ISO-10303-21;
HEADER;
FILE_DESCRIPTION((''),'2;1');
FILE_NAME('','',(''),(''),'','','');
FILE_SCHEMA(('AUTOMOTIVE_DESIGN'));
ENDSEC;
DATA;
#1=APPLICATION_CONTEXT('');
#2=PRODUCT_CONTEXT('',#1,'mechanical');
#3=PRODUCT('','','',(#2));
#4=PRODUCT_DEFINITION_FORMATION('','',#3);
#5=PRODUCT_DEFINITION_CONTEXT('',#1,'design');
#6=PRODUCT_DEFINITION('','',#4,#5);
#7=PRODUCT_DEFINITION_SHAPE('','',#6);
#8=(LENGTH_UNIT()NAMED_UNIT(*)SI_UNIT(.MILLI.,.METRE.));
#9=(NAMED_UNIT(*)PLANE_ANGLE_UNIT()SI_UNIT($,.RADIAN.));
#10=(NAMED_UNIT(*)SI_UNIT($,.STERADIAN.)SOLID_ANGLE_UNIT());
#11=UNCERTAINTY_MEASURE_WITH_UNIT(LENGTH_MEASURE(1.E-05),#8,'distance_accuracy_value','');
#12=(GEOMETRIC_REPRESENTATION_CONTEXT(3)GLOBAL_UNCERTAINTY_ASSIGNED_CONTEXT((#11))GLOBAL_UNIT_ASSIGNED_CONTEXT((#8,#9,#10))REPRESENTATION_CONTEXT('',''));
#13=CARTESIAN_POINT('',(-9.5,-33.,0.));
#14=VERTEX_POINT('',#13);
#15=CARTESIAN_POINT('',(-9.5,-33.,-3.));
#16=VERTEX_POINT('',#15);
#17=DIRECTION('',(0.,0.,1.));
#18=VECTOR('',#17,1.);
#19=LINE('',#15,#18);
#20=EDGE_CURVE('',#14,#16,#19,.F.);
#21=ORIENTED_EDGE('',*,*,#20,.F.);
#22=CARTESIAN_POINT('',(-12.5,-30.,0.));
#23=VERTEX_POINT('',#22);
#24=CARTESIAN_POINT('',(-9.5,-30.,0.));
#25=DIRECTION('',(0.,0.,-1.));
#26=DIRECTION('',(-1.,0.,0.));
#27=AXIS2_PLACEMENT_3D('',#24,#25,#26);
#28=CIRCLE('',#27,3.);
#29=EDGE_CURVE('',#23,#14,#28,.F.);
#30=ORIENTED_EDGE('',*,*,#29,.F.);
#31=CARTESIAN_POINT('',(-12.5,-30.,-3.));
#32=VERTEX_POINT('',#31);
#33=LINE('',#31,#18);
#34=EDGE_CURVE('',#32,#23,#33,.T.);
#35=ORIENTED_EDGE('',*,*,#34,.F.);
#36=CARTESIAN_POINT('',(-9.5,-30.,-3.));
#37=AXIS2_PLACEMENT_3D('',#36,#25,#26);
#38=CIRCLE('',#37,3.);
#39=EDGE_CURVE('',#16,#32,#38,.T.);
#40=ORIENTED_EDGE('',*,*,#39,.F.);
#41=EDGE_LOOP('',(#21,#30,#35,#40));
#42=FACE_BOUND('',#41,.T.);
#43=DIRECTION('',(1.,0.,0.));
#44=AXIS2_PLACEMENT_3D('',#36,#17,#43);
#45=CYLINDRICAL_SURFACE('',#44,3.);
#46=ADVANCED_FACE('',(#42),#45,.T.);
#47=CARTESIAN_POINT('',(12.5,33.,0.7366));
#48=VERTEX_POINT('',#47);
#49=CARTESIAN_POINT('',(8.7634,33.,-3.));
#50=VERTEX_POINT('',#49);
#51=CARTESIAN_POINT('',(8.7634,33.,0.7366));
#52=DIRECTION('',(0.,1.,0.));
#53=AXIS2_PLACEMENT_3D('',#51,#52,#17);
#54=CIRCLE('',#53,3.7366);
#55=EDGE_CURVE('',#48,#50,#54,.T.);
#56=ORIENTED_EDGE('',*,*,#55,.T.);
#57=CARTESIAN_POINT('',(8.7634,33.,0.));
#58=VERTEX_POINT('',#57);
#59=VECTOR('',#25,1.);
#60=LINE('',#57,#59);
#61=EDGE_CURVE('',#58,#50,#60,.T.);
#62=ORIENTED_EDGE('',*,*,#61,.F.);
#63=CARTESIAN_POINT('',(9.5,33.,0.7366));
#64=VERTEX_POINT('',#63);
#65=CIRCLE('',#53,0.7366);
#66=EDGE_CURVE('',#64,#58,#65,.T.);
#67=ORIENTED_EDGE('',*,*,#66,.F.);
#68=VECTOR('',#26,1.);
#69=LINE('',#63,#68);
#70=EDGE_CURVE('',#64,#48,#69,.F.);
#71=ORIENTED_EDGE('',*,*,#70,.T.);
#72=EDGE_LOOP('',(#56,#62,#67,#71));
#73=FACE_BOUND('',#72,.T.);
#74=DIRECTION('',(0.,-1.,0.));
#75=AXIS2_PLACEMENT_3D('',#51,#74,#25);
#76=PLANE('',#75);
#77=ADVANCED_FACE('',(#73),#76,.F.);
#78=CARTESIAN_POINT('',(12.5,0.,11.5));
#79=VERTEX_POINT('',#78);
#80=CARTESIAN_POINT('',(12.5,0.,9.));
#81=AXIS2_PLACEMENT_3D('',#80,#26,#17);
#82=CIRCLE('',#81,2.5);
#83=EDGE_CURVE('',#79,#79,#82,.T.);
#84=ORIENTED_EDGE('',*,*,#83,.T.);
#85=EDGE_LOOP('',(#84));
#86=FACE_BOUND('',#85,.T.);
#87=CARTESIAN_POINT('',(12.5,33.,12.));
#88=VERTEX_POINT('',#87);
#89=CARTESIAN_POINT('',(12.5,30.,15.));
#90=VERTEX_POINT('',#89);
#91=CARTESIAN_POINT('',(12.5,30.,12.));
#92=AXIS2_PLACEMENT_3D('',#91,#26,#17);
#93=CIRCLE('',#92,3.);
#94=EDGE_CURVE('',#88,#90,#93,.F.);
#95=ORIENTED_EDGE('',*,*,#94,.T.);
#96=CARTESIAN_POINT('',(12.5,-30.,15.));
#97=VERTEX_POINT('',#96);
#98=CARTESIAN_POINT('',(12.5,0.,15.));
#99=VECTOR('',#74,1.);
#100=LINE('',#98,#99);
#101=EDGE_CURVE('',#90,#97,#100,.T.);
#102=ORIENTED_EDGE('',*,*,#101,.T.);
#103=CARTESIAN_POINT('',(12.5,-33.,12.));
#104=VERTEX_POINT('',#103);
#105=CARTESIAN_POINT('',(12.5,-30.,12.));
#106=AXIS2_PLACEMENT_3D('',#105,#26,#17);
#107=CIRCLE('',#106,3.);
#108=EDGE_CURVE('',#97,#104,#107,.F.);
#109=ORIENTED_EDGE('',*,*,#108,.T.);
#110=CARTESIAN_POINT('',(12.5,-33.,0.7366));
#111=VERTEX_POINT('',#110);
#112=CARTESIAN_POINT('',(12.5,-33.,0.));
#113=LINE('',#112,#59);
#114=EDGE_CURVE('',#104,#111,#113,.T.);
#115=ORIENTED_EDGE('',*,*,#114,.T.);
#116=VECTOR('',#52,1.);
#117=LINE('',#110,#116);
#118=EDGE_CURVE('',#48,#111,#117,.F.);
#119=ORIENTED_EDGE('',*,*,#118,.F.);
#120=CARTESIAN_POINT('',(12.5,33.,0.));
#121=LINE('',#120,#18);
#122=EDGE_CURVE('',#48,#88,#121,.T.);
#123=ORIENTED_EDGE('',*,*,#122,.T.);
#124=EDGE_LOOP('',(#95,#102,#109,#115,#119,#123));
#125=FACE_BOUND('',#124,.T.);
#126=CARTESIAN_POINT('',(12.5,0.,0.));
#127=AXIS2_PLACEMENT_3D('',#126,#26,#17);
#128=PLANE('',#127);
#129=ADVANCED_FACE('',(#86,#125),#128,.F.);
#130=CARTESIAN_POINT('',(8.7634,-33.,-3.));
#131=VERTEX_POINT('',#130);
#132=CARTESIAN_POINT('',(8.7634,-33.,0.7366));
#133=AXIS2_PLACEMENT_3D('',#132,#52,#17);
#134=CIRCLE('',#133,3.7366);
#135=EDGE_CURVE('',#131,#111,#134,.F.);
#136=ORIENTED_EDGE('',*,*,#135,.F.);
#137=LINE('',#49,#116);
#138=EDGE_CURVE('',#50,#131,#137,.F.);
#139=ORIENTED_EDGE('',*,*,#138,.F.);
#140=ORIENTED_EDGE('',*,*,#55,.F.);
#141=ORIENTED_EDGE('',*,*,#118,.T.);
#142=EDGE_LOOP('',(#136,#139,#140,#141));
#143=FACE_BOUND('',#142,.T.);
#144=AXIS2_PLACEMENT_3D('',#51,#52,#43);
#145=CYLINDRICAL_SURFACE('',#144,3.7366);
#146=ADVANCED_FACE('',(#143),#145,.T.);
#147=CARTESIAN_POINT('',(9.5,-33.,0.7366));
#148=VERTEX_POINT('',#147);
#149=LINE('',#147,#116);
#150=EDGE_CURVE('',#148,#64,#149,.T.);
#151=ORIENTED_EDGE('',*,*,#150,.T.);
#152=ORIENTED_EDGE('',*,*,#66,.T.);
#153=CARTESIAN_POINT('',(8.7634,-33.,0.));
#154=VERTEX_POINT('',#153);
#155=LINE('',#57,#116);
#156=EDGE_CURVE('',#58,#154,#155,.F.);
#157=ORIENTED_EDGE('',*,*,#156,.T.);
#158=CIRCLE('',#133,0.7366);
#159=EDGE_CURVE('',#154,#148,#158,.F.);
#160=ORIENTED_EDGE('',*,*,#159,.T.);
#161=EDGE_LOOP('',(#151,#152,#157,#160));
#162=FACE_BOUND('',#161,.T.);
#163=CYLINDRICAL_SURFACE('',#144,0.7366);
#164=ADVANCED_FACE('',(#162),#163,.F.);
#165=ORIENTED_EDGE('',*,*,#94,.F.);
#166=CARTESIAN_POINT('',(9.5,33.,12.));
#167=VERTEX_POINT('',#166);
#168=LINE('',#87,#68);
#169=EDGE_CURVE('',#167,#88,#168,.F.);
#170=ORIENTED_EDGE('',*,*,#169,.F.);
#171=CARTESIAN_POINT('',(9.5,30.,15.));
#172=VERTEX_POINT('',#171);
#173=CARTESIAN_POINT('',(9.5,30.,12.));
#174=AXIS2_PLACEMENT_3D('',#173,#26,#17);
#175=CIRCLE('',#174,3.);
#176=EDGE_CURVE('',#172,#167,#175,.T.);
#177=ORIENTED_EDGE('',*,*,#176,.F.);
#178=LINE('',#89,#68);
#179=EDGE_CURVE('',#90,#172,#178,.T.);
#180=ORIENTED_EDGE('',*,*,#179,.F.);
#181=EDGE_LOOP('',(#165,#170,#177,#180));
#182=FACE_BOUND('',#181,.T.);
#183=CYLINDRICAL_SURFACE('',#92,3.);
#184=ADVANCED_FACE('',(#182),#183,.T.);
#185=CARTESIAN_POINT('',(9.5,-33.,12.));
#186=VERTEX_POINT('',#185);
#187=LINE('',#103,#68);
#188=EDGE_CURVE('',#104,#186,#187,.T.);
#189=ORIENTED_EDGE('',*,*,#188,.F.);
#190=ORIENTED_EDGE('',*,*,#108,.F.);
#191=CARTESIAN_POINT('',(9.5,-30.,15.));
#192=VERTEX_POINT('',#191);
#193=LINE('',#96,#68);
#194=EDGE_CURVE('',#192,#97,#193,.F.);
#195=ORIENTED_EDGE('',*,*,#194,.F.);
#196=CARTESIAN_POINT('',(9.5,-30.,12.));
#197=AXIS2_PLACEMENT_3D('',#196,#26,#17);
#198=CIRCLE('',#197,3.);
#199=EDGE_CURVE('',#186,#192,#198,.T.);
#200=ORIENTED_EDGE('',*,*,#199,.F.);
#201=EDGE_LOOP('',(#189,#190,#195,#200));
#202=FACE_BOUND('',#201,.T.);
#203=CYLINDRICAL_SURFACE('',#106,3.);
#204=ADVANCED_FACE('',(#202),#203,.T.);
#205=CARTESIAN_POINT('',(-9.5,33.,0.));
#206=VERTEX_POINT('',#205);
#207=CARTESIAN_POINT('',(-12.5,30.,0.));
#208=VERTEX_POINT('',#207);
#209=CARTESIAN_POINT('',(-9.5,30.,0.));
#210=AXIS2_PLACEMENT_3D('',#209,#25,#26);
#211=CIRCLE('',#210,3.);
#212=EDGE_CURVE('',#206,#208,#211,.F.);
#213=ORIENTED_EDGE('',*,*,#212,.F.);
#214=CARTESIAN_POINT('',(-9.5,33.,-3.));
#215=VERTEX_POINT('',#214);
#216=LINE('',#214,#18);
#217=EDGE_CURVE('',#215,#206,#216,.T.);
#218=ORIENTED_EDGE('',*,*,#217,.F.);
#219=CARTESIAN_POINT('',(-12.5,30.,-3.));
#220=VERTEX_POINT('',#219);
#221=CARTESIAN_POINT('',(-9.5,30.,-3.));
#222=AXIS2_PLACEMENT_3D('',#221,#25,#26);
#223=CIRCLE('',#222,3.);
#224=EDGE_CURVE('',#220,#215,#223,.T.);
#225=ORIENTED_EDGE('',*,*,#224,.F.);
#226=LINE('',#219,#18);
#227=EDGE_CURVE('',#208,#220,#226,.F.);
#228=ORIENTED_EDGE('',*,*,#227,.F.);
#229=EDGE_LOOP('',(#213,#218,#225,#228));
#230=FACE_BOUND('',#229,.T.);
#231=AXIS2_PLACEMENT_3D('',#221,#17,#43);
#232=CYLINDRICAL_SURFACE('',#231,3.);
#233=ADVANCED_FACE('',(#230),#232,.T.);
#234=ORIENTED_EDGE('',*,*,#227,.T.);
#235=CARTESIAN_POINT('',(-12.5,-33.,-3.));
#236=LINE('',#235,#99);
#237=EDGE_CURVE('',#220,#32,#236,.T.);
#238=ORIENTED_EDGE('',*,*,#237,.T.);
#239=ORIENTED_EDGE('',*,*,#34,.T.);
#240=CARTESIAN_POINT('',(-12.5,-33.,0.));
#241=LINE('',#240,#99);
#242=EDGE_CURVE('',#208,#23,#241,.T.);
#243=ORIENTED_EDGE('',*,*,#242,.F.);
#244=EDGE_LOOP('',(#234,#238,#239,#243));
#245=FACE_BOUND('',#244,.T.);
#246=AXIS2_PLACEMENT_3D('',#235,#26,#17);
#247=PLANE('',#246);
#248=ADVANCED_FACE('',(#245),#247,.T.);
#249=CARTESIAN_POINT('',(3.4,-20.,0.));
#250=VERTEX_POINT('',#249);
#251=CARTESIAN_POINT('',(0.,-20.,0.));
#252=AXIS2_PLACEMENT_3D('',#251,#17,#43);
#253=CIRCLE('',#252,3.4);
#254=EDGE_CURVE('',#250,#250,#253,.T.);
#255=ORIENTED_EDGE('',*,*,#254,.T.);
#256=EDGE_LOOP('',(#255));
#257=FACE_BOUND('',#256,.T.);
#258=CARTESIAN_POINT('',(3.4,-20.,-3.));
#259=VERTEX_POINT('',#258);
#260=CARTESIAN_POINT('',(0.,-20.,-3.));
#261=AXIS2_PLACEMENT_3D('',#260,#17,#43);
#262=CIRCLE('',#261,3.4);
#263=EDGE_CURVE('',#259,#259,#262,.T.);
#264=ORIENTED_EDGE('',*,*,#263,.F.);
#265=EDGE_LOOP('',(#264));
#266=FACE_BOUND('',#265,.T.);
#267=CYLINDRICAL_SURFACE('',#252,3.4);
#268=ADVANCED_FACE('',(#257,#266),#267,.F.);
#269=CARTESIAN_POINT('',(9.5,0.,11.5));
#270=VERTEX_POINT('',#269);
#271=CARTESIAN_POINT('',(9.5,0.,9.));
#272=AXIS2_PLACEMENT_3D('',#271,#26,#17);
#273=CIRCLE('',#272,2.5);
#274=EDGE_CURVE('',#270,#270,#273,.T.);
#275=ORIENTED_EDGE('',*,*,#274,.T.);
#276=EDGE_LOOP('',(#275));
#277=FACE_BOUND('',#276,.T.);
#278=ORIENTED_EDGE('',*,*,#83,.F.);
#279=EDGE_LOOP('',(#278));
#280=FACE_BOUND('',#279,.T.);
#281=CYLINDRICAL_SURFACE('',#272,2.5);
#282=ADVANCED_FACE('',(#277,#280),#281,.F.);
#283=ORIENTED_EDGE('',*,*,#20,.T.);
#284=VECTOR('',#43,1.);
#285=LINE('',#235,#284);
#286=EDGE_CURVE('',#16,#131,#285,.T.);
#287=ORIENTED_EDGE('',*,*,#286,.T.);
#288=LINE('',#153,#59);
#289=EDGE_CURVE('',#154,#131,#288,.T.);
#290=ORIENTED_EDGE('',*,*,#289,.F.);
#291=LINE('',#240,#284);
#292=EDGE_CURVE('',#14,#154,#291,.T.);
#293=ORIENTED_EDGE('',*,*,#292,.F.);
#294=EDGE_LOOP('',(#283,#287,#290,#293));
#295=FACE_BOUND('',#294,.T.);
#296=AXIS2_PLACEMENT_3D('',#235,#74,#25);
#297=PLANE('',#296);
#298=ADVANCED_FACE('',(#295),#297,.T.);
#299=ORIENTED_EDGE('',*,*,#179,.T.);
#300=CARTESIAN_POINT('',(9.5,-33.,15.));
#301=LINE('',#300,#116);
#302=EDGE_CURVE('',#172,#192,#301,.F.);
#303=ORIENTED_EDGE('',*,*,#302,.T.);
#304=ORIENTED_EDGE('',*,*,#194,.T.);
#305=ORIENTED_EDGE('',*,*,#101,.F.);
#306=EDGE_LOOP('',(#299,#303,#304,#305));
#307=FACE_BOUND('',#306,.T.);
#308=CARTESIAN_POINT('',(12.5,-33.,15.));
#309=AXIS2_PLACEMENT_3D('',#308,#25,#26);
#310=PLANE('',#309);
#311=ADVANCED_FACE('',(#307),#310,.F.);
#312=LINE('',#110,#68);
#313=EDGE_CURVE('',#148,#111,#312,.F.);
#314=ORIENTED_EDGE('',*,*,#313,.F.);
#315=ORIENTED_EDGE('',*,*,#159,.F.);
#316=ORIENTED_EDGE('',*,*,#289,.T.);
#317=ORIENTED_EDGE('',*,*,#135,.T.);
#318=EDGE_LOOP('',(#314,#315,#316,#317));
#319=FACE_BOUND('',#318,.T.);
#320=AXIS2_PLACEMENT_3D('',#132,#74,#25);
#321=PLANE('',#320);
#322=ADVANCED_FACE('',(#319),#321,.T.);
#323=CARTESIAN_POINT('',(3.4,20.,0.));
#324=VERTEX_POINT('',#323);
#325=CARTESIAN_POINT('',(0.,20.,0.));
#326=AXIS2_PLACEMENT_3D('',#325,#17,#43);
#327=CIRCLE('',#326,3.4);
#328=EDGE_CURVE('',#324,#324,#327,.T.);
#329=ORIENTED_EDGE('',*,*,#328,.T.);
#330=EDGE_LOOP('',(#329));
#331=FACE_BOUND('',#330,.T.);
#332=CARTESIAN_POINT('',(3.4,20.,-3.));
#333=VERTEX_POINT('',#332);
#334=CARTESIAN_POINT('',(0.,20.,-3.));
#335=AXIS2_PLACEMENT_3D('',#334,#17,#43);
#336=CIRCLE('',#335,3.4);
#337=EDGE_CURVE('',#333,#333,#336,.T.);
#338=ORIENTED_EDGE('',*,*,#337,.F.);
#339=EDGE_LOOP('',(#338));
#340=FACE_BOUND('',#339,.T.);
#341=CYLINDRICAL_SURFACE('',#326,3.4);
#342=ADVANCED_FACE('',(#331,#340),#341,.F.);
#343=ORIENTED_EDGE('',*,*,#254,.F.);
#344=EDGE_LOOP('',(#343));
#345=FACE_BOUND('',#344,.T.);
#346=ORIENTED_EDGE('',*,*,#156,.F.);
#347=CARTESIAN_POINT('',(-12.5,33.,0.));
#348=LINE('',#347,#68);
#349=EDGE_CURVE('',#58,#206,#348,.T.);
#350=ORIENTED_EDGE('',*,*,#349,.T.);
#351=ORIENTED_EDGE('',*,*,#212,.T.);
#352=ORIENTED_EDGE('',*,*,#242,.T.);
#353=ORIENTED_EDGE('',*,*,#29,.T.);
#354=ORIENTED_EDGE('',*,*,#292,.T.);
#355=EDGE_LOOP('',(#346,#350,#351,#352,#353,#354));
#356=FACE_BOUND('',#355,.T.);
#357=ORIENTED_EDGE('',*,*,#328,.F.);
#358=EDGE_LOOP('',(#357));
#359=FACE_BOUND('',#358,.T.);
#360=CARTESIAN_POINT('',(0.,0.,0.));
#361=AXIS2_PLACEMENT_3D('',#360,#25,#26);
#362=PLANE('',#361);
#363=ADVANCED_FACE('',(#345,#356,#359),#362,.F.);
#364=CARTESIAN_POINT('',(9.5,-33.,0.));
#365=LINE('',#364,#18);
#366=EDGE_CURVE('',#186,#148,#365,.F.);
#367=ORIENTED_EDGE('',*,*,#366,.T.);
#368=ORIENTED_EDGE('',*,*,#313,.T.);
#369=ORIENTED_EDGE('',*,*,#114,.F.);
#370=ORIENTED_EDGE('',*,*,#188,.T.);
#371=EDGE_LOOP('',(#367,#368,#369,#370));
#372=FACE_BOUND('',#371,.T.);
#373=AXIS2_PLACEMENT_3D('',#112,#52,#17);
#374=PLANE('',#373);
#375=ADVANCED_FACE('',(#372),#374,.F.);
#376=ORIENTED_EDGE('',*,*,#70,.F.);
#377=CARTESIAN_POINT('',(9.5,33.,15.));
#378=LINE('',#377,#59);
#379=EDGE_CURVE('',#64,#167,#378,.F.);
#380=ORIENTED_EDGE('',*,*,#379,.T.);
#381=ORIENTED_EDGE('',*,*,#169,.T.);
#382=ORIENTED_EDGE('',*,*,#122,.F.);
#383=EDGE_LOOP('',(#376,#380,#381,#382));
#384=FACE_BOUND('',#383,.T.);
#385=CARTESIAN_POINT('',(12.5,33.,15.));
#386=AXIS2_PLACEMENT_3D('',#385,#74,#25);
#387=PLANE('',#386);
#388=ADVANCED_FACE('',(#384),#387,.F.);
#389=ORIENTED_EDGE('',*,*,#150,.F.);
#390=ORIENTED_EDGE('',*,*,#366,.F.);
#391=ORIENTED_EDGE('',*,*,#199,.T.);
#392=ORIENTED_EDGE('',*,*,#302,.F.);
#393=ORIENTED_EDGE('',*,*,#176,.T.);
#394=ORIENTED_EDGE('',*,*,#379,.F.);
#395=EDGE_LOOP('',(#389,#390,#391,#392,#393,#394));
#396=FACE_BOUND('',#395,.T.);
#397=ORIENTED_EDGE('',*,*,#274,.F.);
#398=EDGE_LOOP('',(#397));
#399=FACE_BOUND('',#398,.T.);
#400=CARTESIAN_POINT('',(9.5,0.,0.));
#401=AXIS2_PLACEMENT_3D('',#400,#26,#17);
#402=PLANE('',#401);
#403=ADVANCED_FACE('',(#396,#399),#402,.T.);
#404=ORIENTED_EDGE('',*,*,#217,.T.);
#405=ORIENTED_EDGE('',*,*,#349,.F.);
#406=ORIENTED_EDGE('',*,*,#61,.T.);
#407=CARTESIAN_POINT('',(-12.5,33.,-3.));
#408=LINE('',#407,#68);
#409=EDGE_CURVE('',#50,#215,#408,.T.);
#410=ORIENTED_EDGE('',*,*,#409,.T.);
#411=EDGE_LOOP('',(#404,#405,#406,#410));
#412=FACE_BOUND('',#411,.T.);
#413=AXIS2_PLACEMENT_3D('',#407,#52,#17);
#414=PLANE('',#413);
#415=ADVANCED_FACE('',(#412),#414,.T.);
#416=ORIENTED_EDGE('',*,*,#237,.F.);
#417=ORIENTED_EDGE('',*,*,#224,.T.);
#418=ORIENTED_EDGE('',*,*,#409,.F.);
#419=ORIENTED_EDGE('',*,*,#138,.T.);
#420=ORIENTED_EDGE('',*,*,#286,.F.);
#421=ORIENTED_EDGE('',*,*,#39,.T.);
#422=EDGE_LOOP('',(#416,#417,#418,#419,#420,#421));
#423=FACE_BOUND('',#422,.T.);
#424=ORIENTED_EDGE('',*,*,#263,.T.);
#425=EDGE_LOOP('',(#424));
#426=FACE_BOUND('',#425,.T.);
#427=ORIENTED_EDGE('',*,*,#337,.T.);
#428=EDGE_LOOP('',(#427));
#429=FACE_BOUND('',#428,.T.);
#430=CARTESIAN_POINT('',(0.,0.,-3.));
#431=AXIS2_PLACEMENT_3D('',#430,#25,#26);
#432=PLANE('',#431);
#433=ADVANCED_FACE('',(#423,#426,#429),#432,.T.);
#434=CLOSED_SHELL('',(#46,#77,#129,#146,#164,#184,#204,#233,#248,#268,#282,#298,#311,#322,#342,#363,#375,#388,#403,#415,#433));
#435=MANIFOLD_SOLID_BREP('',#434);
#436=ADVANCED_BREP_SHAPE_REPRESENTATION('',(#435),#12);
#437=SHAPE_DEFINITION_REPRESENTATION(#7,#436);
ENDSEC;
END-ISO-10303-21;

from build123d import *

# Parameters (mm, degrees)
SKETCH_1_W                       = 25
SKETCH_1_H                       = 66
SM_BASE_FLANGE_1_DEPTH           = 3
SM_EDGE_FLANGE_1_STRIP_W         = 13.4732
SM_EDGE_FLANGE_1_STRIP_H         = 3
SM_EDGE_FLANGE_1_STRIP_CUT_DEPTH = 66
SM_EDGE_FLANGE_1_DEPTH           = 66
HOLE_WIZARD_M8_1_D               = 6.8
HOLE_WIZARD_M6_2_D               = 5
OTHER_START                      = 9.5
OTHER_1_DEPTH                    = 3
OTHER_START_2                    = -3
OTHER_1_2_DEPTH                  = 3


# Read off the part's stored shape, not the designer's step: 断开-边角1
# Sheet-metal steps are written as plain solids
with BuildPart() as part:
    # Sketch 1 → 基体-法兰1 (new body)
    with BuildSketch(Plane.XY):
        Rectangle(SKETCH_1_W, SKETCH_1_H)
    extrude(amount=-SM_BASE_FLANGE_1_DEPTH)

    # 边线-法兰1 strip (across the edge) → 边线-法兰1 strip cut (cut)
    with BuildSketch(Plane(origin=(12.5, -33, 0), x_dir=(-1, 0, 0), z_dir=(0, 1, 0))):
        with Locations((-3, -1.5)):
            Rectangle(SM_EDGE_FLANGE_1_STRIP_W, SM_EDGE_FLANGE_1_STRIP_H)
    extrude(amount=SM_EDGE_FLANGE_1_STRIP_CUT_DEPTH, mode=Mode.SUBTRACT)

    # 边线-法兰1 section (across the edge) → 边线-法兰1 (add)
    with BuildSketch(Plane(origin=(12.5, -33, 0), x_dir=(-1, 0, 0), z_dir=(0, 1, 0))):
        with BuildLine():
            Line((0, 0.7366), (0, 15))
            Line((0, 15), (3, 15))
            Line((3, 15), (3, 0.7366))
            ThreePointArc((3, 0.7366), (3.215745145, 0.215745145), (3.7366, 0))
            Line((3.7366, 0), (3.7366, -3))
            ThreePointArc((3.7366, -3), (1.094424801, -1.905575199), (0, 0.7366))
        make_face()
    extrude(amount=SM_EDGE_FLANGE_1_DEPTH)

    # M8 螺纹孔1 (through all)
    with Locations(Plane.XY):
        with Locations((0, -20), (0, 20)):
            Hole(HOLE_WIZARD_M8_1_D / 2)

    # M6 螺纹孔2 (through all)
    with Locations(Plane.ZY.offset(-9.5)):
        with Locations((9, 0)):
            Hole(HOLE_WIZARD_M6_2_D / 2)

    # Other 1 outline → Other 1 (cut)
    with BuildSketch(Plane.YZ.offset(OTHER_START)):
        with BuildLine():
            Line((-33, 15), (-33, 12))
            ThreePointArc((-33, 12), (-32.121320344, 14.121320344), (-30, 15))
            Line((-30, 15), (-33, 15))
        make_face()
        with BuildLine():
            Line((33, 15), (30, 15))
            ThreePointArc((30, 15), (32.121320344, 14.121320344), (33, 12))
            Line((33, 12), (33, 15))
        make_face()
    extrude(amount=OTHER_1_DEPTH, mode=Mode.SUBTRACT)

    # Other 1 2 outline → Other 1 2 (cut)
    with BuildSketch(Plane.XY.offset(OTHER_START_2)):
        with BuildLine():
            Line((-12.5, 33), (-12.5, 30))
            ThreePointArc((-12.5, 30), (-11.621320344, 32.121320344), (-9.5, 33))
            Line((-9.5, 33), (-12.5, 33))
        make_face()
        with BuildLine():
            ThreePointArc((-9.5, -33), (-11.621320344, -32.121320344), (-12.5, -30))
            Line((-12.5, -30), (-12.5, -33))
            Line((-12.5, -33), (-9.5, -33))
        make_face()
    extrude(amount=OTHER_1_2_DEPTH, mode=Mode.SUBTRACT)


solid = part.part
